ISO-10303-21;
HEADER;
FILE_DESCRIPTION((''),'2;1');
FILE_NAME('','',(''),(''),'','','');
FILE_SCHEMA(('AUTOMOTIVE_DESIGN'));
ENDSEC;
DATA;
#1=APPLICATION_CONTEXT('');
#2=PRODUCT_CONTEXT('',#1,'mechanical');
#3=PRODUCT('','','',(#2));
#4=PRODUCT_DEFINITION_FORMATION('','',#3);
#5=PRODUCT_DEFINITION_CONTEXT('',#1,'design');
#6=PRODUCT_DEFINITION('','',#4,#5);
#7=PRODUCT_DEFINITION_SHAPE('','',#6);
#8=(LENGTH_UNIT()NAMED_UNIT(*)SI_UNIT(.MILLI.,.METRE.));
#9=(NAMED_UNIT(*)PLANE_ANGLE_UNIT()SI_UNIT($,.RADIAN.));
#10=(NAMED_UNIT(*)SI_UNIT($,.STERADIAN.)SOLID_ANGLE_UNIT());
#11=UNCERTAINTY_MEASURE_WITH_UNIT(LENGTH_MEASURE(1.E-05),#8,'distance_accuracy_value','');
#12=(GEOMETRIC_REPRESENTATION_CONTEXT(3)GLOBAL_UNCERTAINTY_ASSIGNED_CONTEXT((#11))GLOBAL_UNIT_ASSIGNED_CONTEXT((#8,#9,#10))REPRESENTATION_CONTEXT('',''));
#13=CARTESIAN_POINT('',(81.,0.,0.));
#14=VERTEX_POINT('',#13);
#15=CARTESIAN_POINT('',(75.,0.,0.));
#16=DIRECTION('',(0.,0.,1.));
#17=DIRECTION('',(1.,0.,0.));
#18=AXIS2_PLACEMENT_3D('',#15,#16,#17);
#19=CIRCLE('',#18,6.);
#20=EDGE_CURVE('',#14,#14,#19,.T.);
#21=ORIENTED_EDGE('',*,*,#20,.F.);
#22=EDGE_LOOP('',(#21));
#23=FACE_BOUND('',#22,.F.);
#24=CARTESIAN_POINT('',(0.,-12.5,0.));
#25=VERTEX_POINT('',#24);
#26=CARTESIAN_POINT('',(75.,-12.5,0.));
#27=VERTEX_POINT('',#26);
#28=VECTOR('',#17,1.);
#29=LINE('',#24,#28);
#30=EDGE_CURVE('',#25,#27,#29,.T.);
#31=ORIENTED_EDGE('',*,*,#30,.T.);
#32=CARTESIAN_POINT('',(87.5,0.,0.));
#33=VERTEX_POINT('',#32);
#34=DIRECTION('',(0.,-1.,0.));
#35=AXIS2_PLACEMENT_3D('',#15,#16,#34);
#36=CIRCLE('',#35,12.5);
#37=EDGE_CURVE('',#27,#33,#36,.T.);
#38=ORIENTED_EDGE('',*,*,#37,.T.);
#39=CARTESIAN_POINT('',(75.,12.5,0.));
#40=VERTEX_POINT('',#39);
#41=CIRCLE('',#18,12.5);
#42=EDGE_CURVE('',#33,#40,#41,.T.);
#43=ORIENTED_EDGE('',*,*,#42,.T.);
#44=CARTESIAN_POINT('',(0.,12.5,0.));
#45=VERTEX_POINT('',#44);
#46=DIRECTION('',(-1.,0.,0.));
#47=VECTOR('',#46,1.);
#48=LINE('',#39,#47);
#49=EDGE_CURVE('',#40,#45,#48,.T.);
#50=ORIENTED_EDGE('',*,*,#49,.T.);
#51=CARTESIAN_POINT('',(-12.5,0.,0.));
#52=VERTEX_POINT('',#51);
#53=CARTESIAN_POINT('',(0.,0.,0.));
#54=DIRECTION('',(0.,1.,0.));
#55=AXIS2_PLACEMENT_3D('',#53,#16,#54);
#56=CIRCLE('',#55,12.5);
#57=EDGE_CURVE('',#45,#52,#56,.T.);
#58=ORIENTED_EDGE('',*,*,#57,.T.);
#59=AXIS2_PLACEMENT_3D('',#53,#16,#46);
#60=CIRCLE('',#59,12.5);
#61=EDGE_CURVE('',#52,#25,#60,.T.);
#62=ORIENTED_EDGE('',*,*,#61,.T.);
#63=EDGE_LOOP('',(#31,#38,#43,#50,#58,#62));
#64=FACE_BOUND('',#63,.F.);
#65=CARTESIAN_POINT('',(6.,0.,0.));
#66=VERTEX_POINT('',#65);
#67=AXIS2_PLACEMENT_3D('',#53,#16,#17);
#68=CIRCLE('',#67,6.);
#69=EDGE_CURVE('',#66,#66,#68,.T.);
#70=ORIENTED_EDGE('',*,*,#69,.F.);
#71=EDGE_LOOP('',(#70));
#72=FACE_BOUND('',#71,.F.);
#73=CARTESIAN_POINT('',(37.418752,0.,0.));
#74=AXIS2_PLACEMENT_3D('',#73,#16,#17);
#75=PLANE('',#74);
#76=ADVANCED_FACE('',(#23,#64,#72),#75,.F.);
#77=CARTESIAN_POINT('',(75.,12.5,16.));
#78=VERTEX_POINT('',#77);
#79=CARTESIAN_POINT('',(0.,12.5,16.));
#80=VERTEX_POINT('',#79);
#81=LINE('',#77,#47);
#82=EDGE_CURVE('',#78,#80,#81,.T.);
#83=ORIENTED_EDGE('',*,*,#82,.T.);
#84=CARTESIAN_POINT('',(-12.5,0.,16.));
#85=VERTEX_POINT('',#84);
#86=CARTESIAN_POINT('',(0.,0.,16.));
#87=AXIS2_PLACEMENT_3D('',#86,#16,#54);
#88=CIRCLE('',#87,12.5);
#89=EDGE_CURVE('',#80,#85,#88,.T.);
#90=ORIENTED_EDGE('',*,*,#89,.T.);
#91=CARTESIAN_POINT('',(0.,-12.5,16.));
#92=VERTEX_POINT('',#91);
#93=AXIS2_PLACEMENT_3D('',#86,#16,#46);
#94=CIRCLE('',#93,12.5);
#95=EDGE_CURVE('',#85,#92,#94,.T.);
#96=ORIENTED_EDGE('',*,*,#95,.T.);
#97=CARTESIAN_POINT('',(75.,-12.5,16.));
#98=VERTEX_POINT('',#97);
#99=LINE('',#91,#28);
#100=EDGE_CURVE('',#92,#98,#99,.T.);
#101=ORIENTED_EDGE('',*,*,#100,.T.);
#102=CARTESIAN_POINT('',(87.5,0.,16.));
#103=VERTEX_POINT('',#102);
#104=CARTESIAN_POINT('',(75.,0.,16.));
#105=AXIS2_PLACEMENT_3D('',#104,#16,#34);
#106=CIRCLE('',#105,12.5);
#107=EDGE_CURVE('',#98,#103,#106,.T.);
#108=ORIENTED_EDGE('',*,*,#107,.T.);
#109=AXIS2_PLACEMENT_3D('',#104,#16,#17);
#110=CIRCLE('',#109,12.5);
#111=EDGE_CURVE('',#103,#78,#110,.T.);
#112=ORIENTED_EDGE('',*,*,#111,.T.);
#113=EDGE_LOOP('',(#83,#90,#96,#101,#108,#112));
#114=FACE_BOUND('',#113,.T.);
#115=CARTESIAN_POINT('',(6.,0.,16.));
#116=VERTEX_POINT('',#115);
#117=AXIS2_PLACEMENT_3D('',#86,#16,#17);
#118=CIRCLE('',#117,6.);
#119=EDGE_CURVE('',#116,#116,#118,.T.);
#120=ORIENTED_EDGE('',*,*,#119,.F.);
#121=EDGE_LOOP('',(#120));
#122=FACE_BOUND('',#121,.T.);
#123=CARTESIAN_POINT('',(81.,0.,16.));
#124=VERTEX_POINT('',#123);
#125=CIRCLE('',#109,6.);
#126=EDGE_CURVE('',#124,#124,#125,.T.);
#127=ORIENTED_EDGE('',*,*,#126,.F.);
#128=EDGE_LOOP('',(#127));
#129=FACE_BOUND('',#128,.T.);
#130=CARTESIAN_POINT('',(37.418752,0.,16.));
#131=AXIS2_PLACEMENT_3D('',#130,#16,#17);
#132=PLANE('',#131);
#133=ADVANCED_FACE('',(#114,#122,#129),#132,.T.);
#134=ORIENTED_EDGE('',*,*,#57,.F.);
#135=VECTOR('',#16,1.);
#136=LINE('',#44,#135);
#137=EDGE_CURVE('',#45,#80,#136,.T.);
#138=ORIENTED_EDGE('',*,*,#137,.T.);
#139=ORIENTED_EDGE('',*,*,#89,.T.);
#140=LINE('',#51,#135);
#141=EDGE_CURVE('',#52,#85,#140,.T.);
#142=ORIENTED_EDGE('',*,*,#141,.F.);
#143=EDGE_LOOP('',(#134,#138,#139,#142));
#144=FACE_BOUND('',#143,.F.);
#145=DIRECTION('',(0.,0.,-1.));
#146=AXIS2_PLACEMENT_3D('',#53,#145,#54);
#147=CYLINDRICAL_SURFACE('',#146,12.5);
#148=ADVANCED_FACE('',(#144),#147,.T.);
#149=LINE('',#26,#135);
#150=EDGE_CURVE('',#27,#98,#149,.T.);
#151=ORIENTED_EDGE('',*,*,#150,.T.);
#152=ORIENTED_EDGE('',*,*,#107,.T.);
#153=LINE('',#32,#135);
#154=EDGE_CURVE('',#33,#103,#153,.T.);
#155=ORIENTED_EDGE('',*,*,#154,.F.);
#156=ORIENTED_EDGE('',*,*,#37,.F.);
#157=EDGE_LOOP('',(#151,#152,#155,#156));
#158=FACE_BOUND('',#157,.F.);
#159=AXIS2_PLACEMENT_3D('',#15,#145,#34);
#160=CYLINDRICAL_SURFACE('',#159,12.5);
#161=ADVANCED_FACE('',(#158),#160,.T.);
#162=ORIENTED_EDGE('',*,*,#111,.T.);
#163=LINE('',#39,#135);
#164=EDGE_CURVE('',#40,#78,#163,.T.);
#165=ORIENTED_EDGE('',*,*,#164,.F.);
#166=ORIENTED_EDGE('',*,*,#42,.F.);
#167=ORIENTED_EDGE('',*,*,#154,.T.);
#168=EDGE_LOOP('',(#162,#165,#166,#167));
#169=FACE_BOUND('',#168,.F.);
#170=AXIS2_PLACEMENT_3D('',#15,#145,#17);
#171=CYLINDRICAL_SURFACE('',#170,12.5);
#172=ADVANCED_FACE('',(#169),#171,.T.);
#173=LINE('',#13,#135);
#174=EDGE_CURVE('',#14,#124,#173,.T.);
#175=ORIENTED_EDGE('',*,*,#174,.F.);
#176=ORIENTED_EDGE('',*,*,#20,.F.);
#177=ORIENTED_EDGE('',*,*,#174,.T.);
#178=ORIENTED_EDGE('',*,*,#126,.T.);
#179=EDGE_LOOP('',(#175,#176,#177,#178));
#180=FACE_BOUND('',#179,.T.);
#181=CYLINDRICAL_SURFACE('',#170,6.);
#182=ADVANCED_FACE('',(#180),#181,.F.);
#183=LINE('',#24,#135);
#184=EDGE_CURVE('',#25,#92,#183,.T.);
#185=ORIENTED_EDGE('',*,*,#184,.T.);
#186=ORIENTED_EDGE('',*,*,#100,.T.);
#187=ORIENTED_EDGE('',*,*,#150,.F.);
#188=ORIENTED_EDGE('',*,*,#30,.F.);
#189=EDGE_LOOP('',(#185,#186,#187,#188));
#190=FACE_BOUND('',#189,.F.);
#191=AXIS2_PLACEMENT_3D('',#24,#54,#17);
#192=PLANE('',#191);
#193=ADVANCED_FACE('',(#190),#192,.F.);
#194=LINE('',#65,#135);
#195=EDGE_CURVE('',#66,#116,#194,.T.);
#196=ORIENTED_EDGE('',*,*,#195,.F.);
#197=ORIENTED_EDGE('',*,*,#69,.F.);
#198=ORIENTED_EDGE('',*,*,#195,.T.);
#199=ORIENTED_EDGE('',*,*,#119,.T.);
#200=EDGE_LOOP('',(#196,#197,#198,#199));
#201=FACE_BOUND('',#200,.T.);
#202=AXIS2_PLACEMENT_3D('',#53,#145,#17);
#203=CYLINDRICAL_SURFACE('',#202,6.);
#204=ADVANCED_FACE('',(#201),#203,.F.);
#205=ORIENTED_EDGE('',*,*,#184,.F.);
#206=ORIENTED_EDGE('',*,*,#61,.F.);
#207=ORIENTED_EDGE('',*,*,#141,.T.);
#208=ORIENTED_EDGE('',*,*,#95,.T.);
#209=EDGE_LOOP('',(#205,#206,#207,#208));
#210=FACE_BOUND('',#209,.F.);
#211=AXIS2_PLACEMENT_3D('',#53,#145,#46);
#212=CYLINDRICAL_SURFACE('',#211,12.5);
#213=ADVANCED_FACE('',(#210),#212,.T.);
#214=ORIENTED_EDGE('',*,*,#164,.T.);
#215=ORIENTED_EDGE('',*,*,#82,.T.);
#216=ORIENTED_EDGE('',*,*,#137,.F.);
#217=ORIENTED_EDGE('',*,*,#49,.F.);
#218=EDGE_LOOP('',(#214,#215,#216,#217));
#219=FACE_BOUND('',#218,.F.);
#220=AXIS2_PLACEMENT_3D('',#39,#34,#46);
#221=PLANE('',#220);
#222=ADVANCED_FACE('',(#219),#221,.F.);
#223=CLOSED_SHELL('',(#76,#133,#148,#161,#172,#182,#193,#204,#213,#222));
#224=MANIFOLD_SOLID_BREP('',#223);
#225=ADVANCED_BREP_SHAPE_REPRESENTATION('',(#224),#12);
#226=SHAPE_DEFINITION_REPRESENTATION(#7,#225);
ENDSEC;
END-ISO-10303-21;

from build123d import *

# Parameters (mm, degrees)
F0_R     = 6
F1_DEPTH = 16


# Not quite as in the source:
# - a feature names something its author has since deleted; it is built from what else it names


with BuildPart() as f1:
    # F0 (on Top) → F1 (new body)
    with BuildSketch(Plane.XY):
        with BuildLine():
            Line((75, 12.5), (0, 12.5))
            ThreePointArc((0, 12.5), (8.8388347648, 8.8388347648), (12.5, 0))
            ThreePointArc((12.5, 0), (8.8388347648, -8.8388347648), (0, -12.5))
            Line((0, -12.5), (75, -12.5))
            ThreePointArc((75, -12.5), (62.5, 0), (75, 12.5))
        make_face()
        with BuildLine():
            ThreePointArc((12.5, 0), (8.8388347648, 8.8388347648), (0, 12.5))
            ThreePointArc((0, 12.5), (-8.8388347648, 8.8388347648), (-12.5, 0))
            ThreePointArc((-12.5, 0), (-8.8388347648, -8.8388347648), (0, -12.5))
            ThreePointArc((0, -12.5), (8.8388347648, -8.8388347648), (12.5, 0))
        make_face()
        Circle(F0_R, mode=Mode.SUBTRACT)
        with BuildLine():
            ThreePointArc((87.5, 0), (83.8388347648, 8.8388347648), (75, 12.5))
            ThreePointArc((75, 12.5), (62.5, 0), (75, -12.5))
            ThreePointArc((75, -12.5), (83.8388347648, -8.8388347648), (87.5, 0))
        make_face()
        with Locations((75, 0)):
            Circle(F0_R, mode=Mode.SUBTRACT)
    extrude(amount=F1_DEPTH)


solid = f1.part
